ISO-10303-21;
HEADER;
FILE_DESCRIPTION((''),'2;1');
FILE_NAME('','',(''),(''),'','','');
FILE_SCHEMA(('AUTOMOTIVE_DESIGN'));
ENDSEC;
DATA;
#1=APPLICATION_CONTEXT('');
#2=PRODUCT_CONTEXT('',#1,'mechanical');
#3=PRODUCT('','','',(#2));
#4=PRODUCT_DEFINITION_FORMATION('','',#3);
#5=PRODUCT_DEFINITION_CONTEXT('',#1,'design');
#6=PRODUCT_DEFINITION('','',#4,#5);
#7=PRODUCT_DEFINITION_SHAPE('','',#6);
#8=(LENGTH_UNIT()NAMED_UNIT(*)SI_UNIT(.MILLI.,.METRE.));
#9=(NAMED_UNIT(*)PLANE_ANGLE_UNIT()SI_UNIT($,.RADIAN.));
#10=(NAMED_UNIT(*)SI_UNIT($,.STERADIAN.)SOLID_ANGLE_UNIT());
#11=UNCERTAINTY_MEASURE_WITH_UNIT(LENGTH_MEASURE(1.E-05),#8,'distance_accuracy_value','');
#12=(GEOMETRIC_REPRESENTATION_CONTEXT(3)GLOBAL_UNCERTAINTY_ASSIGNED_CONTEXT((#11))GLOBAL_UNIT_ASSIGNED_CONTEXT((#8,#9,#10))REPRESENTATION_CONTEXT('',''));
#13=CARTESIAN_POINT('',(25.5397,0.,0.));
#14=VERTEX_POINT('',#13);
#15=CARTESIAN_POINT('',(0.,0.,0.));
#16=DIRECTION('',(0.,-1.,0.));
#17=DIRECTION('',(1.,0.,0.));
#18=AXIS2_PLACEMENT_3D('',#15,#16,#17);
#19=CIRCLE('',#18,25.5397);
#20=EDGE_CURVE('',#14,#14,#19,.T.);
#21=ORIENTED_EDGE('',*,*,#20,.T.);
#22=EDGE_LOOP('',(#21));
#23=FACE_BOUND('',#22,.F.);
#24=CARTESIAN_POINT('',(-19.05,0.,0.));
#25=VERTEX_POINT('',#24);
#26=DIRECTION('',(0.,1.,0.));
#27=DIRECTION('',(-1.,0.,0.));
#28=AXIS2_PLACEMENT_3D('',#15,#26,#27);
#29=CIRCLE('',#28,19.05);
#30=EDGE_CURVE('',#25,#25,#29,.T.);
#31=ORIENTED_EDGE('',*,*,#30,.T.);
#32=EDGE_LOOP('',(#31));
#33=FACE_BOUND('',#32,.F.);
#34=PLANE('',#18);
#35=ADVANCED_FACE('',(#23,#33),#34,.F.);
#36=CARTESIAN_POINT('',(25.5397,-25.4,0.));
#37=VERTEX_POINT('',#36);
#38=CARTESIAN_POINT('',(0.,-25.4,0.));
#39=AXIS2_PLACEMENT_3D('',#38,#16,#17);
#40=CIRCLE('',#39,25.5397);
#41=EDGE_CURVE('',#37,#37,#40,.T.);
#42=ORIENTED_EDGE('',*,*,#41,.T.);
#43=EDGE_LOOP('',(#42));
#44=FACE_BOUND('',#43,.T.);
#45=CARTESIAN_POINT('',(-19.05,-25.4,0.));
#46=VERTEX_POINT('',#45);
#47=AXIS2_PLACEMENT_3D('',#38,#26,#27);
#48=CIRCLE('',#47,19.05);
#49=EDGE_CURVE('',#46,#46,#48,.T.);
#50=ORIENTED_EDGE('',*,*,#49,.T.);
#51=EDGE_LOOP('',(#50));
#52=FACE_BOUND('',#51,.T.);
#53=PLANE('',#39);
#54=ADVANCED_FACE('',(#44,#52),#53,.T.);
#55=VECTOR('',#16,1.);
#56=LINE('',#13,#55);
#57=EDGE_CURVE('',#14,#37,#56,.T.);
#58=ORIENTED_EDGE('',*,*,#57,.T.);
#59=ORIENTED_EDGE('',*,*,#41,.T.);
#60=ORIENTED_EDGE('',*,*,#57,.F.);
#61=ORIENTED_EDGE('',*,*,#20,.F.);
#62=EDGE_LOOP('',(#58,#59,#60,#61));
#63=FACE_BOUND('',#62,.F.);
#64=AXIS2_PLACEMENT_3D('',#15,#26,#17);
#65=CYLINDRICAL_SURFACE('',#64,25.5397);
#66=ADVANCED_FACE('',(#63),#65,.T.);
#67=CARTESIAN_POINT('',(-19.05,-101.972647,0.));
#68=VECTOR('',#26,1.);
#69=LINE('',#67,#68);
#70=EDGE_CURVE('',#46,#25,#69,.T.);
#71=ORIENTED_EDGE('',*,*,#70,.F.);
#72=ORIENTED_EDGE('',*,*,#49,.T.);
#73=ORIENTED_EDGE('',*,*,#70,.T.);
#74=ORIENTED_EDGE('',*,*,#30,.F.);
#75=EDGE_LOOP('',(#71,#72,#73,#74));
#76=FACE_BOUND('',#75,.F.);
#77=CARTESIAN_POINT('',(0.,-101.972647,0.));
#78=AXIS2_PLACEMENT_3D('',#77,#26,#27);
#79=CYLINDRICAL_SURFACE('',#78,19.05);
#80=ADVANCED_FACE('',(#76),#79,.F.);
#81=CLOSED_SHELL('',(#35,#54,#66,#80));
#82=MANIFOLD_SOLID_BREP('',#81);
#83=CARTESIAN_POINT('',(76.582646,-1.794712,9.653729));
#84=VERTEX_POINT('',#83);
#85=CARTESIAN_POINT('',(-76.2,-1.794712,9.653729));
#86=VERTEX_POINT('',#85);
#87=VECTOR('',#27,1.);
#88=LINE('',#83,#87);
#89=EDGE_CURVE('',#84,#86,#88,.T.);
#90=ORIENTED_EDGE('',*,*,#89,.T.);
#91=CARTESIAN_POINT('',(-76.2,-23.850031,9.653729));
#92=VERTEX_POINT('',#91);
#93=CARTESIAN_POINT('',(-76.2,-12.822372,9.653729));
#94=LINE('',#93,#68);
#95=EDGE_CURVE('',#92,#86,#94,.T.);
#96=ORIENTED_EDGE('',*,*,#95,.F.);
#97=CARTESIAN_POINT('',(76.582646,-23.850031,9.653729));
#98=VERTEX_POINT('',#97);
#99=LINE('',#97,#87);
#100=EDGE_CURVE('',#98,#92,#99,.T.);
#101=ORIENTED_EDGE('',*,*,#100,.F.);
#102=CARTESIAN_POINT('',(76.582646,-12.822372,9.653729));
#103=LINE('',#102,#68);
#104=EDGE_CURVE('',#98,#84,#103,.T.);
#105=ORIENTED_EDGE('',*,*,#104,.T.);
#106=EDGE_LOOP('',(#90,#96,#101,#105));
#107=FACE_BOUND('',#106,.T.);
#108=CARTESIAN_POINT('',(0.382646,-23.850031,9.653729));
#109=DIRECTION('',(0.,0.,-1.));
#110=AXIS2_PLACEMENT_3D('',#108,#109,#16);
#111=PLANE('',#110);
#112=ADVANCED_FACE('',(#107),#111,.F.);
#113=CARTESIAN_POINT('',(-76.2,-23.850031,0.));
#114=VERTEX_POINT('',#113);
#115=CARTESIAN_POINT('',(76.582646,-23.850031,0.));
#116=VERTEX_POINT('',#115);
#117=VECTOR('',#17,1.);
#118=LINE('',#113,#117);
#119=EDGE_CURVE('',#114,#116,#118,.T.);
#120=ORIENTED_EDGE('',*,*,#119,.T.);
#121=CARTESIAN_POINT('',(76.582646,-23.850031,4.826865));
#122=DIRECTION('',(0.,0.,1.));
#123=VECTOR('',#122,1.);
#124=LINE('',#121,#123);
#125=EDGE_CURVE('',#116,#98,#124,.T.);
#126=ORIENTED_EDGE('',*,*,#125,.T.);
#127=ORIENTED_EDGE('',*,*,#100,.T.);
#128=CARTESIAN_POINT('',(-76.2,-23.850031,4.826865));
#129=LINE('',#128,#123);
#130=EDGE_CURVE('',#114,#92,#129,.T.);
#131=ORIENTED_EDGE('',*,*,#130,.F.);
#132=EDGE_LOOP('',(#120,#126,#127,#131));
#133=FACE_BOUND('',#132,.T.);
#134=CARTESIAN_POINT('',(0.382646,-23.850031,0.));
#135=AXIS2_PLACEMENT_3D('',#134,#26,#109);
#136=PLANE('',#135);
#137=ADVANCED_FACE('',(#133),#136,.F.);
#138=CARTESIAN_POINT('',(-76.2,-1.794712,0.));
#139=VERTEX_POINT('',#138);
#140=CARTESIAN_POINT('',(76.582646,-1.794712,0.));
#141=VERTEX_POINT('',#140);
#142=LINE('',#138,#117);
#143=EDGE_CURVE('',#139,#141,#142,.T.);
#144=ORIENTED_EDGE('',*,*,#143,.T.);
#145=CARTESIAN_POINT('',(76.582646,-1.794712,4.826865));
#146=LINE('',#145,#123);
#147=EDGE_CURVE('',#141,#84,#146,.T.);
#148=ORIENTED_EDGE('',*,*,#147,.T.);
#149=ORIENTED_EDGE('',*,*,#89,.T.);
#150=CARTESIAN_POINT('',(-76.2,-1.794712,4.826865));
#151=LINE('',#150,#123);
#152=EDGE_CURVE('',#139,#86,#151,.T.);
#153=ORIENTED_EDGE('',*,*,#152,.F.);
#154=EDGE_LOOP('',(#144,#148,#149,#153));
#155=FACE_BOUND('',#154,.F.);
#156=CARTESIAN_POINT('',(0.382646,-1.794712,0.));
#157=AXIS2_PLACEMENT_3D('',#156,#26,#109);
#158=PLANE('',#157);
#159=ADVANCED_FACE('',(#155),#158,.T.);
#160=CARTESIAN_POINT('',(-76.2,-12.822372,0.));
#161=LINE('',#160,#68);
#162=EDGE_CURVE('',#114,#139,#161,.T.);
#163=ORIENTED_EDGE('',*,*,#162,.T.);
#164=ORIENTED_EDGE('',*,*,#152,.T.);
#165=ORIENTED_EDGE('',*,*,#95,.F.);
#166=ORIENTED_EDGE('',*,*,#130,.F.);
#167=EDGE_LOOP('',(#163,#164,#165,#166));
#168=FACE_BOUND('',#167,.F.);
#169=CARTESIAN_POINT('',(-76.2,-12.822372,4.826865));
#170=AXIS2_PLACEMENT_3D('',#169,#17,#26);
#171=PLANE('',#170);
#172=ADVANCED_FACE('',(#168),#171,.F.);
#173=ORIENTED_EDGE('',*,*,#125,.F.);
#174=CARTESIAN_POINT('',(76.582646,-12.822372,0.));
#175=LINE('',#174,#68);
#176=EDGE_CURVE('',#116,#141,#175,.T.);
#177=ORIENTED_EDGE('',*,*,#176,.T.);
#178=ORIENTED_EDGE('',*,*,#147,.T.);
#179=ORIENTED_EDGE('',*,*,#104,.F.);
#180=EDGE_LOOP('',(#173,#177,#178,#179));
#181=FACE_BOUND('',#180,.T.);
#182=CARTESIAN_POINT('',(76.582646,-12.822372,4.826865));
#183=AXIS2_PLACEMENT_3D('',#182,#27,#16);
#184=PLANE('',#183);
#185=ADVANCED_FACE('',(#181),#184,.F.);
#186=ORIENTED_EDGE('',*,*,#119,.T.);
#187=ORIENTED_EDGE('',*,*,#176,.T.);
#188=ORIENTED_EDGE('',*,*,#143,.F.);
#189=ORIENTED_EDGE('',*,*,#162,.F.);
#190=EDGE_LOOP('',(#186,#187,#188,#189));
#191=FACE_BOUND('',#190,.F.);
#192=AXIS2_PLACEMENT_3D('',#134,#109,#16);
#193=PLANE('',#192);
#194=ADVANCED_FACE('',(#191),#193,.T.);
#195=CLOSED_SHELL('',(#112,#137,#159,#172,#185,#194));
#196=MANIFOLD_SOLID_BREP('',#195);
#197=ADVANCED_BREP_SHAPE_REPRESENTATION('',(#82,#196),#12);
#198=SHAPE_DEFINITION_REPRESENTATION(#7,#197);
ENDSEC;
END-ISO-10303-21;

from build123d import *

# Parameters (mm, degrees)
F0_R          = 25.5397
F1_DEPTH      = 25.4
F3_D          = 38.1
F4_W          = 22.0553190447
F4_H          = 9.6537293866
F5_DEPTH      = 25.5407
F5_DEPTH_BACK = 76.2


# Not quite as in the source:
# - a pattern or mirror of a feature is missing from the dataset's text; its kind, count and spacing are read off the source's solid


with BuildPart() as f1:
    # F0 (on Front) → F1 (new body)
    with BuildSketch(Plane.XZ):
        Circle(F0_R)
    extrude(amount=F1_DEPTH)

    # F3 (through all)
    with Locations(Plane.XZ.offset(25.4)):
        with Locations((0, 0)):
            Hole(F3_D / 2)


with BuildPart() as f5:
    # F4 (on Right) → F5 (new body, two sides)
    with BuildSketch(Plane.YZ) as f5_sk:
        with Locations((-12.8223716747, 4.8268646933)):
            Rectangle(F4_W, F4_H)
    extrude(amount=F5_DEPTH)
    extrude(f5_sk.sketch, amount=-F5_DEPTH_BACK)

    # F5_copies: F5 across plane


with BuildPart() as f5_1:
    add(f5.part)
    add(f5.part.mirror(Plane(origin=(0.191323, 0, 0), x_dir=(0, 0, 1), z_dir=(1, 0, 0))))


solid = Compound([f1.part, f5_1.part])
